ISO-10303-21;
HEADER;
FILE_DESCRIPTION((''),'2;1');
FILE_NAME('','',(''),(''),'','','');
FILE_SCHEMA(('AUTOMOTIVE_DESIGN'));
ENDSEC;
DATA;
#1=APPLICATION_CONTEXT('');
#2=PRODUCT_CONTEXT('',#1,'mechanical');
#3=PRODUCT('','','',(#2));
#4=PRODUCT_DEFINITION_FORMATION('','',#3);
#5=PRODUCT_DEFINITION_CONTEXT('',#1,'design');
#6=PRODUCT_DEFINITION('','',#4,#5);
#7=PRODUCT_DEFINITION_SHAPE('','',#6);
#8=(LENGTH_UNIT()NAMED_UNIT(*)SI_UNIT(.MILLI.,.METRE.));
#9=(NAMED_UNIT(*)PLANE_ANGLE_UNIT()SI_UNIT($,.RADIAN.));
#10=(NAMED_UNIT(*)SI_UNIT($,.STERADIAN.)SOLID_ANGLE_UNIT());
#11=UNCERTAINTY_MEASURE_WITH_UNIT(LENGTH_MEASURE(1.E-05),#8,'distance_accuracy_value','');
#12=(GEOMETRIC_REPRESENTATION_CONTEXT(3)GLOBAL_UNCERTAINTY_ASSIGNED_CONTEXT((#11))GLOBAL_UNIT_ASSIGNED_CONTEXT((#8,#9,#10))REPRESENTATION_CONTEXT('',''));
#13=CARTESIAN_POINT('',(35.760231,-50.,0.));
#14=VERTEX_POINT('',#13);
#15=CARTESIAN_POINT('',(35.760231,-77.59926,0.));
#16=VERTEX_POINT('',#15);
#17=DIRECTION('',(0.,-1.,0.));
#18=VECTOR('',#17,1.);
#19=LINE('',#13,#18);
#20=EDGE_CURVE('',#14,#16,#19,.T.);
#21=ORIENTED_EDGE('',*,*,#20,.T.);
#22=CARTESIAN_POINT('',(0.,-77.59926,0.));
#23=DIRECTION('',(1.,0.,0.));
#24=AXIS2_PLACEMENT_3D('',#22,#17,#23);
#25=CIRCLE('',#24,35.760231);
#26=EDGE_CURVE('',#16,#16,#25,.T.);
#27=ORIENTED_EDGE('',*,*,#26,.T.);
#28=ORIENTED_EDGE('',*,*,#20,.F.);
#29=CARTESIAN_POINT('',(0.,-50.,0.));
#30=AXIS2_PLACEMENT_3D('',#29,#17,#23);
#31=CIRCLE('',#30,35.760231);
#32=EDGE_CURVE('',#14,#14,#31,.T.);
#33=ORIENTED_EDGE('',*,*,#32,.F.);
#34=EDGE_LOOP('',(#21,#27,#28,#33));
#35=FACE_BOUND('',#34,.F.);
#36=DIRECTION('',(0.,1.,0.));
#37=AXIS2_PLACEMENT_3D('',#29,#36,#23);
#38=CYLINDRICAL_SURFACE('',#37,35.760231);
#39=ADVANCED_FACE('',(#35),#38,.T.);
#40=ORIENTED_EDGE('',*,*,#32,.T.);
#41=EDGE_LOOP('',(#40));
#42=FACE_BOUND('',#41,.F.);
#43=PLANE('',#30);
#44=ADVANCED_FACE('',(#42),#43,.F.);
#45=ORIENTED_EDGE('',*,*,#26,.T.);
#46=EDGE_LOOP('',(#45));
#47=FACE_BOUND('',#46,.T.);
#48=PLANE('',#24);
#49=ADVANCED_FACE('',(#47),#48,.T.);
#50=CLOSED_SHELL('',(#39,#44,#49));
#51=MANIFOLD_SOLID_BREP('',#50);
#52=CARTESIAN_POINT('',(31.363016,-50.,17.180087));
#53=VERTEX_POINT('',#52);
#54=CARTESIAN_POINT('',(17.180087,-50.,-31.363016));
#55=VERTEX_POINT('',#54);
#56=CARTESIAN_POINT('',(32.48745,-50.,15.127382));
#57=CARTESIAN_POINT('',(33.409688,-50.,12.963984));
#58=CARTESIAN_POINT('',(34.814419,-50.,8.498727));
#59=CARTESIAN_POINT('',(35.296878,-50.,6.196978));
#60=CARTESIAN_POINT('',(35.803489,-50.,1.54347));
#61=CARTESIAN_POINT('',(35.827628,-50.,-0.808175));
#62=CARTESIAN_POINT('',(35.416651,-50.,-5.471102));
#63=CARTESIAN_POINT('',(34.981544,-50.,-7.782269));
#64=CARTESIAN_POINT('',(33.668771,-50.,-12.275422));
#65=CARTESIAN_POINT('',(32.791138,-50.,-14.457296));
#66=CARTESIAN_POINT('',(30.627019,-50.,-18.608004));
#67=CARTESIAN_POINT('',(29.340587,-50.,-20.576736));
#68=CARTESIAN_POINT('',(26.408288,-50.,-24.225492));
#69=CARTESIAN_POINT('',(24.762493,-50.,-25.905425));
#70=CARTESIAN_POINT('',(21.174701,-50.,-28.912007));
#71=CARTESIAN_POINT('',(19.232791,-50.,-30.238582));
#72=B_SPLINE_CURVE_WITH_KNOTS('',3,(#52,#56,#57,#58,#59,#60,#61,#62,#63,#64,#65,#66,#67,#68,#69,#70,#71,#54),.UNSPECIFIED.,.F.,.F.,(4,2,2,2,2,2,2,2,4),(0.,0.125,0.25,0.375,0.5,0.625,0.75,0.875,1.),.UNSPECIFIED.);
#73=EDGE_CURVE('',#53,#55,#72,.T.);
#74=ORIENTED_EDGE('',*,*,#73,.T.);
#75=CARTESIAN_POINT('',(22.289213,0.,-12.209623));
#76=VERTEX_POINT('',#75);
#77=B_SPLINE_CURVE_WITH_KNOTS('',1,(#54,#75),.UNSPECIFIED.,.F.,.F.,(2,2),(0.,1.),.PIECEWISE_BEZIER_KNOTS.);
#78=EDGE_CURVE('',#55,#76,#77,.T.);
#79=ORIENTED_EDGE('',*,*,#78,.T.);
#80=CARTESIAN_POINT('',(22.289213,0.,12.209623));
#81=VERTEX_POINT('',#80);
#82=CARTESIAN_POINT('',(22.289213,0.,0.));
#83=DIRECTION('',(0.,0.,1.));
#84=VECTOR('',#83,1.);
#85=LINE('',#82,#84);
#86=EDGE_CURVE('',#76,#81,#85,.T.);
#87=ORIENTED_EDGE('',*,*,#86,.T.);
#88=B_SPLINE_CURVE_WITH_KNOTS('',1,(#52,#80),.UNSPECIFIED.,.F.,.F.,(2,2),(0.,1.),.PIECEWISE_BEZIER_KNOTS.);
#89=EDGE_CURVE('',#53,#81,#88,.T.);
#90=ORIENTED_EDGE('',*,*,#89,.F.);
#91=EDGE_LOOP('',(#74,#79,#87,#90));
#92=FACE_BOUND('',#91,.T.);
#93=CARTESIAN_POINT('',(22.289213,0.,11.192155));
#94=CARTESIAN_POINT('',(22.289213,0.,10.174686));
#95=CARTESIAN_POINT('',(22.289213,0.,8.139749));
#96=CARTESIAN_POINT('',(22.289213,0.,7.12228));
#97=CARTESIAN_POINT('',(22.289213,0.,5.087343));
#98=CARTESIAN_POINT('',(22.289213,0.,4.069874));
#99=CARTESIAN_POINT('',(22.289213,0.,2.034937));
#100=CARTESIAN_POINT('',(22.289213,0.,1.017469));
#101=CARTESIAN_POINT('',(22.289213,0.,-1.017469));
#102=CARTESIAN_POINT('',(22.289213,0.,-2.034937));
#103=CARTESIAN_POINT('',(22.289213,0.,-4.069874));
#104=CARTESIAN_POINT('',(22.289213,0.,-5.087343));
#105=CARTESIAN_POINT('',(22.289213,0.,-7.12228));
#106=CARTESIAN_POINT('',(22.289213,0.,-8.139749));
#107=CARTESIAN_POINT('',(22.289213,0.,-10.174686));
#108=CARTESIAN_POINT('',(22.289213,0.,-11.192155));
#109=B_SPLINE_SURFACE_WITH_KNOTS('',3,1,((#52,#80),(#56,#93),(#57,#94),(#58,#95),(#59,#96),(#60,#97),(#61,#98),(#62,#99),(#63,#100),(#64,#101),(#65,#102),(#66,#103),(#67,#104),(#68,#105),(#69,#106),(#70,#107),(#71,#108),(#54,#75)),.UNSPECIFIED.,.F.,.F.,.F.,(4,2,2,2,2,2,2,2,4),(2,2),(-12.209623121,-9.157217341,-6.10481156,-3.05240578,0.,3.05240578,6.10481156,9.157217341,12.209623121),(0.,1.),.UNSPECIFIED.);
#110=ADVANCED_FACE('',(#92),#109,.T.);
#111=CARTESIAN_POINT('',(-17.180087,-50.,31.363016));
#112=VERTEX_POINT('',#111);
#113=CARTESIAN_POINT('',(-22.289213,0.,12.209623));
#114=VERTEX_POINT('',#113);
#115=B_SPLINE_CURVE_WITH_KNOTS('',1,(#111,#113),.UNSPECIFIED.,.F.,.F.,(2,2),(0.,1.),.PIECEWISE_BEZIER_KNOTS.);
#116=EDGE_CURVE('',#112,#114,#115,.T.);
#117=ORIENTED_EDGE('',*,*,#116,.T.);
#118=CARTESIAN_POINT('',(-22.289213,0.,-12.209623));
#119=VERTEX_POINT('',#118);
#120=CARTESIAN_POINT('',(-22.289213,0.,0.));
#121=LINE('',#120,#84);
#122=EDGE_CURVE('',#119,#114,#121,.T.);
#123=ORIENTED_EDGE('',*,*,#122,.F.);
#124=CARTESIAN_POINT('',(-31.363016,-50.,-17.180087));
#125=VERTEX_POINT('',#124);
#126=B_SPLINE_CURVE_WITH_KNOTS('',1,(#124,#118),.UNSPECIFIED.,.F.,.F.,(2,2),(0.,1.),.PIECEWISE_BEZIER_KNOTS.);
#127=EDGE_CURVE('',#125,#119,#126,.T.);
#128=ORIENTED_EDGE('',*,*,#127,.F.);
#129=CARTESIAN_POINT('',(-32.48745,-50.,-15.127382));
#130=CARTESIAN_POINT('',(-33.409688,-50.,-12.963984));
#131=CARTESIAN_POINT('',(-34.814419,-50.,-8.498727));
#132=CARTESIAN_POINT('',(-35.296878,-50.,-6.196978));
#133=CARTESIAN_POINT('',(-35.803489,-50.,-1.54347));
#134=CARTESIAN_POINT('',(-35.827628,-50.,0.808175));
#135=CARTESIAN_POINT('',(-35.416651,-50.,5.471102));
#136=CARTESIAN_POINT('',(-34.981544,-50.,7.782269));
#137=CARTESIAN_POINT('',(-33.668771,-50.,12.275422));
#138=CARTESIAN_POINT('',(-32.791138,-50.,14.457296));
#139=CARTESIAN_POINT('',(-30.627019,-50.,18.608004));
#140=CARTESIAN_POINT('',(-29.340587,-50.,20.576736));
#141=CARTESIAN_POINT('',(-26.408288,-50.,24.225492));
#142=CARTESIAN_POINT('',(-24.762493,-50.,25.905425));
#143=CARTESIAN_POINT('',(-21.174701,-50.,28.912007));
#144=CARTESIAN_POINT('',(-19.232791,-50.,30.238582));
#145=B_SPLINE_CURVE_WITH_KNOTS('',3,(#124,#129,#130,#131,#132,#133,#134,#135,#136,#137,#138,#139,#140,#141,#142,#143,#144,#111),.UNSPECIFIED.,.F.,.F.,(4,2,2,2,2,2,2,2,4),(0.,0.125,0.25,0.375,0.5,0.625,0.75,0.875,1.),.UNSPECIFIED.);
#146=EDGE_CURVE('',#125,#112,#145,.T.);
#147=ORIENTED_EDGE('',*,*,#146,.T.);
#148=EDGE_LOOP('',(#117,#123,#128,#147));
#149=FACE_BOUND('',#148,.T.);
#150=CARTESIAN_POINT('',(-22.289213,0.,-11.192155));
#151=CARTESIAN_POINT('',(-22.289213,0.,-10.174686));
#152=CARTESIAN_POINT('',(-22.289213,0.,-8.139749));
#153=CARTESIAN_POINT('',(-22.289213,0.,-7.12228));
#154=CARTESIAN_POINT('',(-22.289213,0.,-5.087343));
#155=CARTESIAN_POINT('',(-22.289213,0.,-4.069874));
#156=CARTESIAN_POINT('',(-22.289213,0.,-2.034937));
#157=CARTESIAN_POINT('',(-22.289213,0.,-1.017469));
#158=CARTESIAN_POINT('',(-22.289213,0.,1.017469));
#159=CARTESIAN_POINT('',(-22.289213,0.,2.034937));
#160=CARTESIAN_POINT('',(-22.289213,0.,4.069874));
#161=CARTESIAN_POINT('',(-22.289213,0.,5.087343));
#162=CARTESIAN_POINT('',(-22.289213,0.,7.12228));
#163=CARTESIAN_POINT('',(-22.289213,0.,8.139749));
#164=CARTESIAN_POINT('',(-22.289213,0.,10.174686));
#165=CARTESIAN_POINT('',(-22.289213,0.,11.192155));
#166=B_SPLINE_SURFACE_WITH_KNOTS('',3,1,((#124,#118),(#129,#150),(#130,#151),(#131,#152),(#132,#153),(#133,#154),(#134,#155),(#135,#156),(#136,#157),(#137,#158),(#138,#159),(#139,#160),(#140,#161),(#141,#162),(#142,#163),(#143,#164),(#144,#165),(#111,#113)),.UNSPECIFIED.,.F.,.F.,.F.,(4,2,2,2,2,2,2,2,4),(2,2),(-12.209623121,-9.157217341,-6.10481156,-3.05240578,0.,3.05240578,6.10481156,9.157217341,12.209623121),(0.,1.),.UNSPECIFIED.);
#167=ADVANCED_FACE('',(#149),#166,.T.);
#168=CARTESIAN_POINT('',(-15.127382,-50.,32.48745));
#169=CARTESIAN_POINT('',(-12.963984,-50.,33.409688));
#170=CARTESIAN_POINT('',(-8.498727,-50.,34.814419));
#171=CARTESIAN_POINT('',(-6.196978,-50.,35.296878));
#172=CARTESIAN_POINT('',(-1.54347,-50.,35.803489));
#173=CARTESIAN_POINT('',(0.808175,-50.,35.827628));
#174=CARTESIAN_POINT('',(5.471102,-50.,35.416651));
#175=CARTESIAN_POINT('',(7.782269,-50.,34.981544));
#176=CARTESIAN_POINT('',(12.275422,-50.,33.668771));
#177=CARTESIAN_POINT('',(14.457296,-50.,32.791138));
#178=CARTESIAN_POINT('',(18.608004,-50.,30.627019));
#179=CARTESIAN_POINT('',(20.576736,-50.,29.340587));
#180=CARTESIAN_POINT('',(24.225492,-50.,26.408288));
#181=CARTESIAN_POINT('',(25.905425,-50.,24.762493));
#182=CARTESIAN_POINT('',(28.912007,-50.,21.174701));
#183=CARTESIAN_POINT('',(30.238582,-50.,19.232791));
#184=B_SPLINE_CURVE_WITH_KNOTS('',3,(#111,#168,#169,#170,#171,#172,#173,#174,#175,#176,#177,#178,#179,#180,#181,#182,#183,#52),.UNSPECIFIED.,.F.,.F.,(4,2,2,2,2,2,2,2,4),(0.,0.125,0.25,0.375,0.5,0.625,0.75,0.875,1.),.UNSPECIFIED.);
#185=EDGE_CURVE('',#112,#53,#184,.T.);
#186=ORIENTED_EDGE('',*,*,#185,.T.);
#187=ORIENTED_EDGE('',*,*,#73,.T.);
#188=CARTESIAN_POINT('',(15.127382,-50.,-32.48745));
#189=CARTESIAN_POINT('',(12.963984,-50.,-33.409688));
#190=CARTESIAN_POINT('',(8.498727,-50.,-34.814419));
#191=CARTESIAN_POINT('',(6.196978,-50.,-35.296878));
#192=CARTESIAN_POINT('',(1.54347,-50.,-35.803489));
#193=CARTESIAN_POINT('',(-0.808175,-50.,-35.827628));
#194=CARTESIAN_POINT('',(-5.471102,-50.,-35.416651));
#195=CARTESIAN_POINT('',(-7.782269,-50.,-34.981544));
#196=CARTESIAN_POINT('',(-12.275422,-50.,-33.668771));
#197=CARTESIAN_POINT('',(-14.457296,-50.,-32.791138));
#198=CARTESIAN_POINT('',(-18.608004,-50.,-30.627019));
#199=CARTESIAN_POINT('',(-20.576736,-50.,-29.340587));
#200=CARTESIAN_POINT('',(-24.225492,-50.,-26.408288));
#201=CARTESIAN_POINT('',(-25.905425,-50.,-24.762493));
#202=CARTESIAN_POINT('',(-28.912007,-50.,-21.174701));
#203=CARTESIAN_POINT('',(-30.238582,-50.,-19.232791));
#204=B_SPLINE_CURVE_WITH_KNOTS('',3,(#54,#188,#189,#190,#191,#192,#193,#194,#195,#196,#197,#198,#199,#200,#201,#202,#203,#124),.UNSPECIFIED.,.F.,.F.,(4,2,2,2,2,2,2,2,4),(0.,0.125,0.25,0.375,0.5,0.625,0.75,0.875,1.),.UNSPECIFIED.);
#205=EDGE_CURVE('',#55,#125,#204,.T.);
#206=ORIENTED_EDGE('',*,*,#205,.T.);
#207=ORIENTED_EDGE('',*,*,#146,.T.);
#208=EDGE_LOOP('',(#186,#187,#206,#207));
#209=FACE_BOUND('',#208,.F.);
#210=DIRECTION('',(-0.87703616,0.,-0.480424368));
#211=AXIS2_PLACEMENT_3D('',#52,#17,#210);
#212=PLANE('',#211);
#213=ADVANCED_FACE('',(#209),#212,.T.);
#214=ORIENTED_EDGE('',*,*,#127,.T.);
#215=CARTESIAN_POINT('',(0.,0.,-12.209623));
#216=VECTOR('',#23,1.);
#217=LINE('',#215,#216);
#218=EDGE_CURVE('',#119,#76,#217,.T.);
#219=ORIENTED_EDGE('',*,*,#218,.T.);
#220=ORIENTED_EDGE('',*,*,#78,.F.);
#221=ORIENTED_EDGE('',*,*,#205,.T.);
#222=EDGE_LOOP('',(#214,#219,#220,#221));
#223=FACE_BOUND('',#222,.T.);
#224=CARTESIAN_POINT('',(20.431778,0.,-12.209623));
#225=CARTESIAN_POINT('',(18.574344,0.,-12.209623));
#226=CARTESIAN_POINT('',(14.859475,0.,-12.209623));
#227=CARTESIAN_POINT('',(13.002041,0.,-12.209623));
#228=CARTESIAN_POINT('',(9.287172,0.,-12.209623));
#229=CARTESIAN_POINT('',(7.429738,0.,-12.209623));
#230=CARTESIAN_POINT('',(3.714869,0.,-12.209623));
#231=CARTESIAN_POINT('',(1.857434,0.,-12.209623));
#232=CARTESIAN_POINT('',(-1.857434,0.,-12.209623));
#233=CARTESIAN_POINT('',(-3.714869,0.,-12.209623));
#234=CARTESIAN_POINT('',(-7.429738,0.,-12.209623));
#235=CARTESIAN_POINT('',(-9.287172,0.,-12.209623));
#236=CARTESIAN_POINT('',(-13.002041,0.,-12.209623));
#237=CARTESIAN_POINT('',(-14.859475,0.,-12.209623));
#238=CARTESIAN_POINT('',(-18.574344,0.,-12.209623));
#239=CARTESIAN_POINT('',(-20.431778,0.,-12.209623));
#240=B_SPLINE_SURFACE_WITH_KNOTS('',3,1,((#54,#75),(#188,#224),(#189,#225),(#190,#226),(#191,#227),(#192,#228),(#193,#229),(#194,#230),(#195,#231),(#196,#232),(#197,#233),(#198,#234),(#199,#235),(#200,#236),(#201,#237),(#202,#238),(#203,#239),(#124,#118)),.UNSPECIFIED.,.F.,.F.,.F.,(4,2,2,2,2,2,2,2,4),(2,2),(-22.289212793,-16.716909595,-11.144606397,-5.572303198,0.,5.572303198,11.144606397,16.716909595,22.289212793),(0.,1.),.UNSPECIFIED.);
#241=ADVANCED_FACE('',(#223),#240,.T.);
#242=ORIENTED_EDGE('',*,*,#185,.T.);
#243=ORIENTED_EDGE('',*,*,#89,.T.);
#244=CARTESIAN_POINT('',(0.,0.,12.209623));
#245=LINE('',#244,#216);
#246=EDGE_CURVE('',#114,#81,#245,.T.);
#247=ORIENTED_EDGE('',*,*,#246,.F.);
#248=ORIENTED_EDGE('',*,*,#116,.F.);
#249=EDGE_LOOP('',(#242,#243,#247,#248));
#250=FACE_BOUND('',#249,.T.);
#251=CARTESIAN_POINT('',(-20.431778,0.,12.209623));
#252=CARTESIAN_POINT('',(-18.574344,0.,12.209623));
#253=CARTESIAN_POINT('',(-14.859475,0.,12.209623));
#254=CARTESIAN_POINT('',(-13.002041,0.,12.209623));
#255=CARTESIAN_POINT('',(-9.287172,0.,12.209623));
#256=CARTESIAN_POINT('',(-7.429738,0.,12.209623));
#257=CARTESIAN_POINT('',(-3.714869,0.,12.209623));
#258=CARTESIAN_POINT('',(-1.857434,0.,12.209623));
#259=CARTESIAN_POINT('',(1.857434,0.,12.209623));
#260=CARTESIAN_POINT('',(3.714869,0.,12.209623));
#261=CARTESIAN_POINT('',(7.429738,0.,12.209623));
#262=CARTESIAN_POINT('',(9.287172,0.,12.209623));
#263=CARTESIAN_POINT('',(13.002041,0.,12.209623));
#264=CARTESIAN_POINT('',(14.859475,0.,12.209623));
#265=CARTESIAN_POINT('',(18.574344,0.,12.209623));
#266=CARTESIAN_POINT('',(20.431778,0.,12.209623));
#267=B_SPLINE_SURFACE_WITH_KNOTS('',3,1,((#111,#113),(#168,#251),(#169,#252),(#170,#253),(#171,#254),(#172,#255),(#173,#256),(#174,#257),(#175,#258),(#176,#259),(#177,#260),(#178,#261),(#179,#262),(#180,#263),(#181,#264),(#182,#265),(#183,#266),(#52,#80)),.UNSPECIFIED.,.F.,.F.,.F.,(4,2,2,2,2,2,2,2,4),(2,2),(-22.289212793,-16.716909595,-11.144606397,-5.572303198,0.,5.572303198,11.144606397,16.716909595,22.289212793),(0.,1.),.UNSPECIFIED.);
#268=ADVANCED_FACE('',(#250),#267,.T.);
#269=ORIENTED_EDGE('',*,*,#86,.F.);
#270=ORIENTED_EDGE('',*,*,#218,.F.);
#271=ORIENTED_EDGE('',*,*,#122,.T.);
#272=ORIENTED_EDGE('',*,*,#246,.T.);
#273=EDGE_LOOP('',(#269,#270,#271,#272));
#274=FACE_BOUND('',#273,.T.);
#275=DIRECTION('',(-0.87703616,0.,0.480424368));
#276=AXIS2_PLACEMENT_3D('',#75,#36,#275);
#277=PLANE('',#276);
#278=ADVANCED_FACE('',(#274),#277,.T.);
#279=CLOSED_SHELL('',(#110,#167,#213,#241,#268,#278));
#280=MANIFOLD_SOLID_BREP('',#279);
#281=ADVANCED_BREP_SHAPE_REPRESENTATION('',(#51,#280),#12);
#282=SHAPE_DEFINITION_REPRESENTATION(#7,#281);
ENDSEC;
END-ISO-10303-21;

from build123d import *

# Parameters (mm, degrees)
F2_R     = 35.7602314712
F3_DEPTH = 27.59926
F0_W     = 44.5784255862
F0_H     = 24.4192462415


# Not quite as in the source:
# - the arcs of a loft's sections are written as splines that run evenly, so that the points pair up as in the source's solid


with BuildPart() as f3:
    # F2 (on offset) → F3 (new body)
    with BuildSketch(Plane.XZ.offset(50)):
        Circle(F2_R)
    extrude(amount=F3_DEPTH)


with BuildPart() as f4:
    # F3_face (on face) → F4 section 0
    with BuildSketch(Plane(origin=(0, -50, 0), x_dir=(1, 0, 0), z_dir=(0, 1, 0))):
        with BuildLine():
            add(Edge.make_bspline(
                [(31.3630160959, -17.1800866192), (32.4874501357, -15.1273820159), (33.4096876137, -12.9639838215), (34.8144187197, -8.4987265037), (35.2968776128, -6.1969777925), (35.8034887164, -1.5434696982), (35.8276283999, 0.8081746177), (35.4166507206, 5.4711017822), (34.9815435199, 7.7822693307), (33.6687706994, 12.2754218894), (32.7911375404, 14.4572957976), (30.627018702, 18.6080044175), (29.3405865347, 20.5767364947), (26.4082875517, 24.2254917713), (24.7624932428, 25.905424748), (21.1747007207, 28.9120070622), (19.2327912226, 30.2385820561), (17.1800866192, 31.3630160959)],
                knots=[0, 0, 0, 0, 0.125, 0.125, 0.25, 0.25, 0.375, 0.375, 0.5, 0.5, 0.625, 0.625, 0.75, 0.75, 0.875, 0.875, 1, 1, 1, 1], degree=3))
            add(Edge.make_bspline(
                [(17.1800866192, 31.3630160959), (15.1273820159, 32.4874501357), (12.9639838215, 33.4096876137), (8.4987265037, 34.8144187197), (6.1969777925, 35.2968776128), (1.5434696982, 35.8034887164), (-0.8081746177, 35.8276283999), (-5.4711017822, 35.4166507206), (-7.7822693307, 34.9815435199), (-12.2754218894, 33.6687706994), (-14.4572957976, 32.7911375404), (-18.6080044175, 30.627018702), (-20.5767364947, 29.3405865347), (-24.2254917713, 26.4082875517), (-25.905424748, 24.7624932428), (-28.9120070622, 21.1747007207), (-30.2385820561, 19.2327912226), (-31.3630160959, 17.1800866192)],
                knots=[0, 0, 0, 0, 0.125, 0.125, 0.25, 0.25, 0.375, 0.375, 0.5, 0.5, 0.625, 0.625, 0.75, 0.75, 0.875, 0.875, 1, 1, 1, 1], degree=3))
            add(Edge.make_bspline(
                [(-31.3630160959, 17.1800866192), (-32.4874501357, 15.1273820159), (-33.4096876137, 12.9639838215), (-34.8144187197, 8.4987265037), (-35.2968776128, 6.1969777925), (-35.8034887164, 1.5434696982), (-35.8276283999, -0.8081746177), (-35.4166507206, -5.4711017822), (-34.9815435199, -7.7822693307), (-33.6687706994, -12.2754218894), (-32.7911375404, -14.4572957976), (-30.627018702, -18.6080044175), (-29.3405865347, -20.5767364947), (-26.4082875517, -24.2254917713), (-24.7624932428, -25.905424748), (-21.1747007207, -28.9120070622), (-19.2327912226, -30.2385820561), (-17.1800866192, -31.3630160959)],
                knots=[0, 0, 0, 0, 0.125, 0.125, 0.25, 0.25, 0.375, 0.375, 0.5, 0.5, 0.625, 0.625, 0.75, 0.75, 0.875, 0.875, 1, 1, 1, 1], degree=3))
            add(Edge.make_bspline(
                [(-17.1800866192, -31.3630160959), (-15.1273820159, -32.4874501357), (-12.9639838215, -33.4096876137), (-8.4987265037, -34.8144187197), (-6.1969777925, -35.2968776128), (-1.5434696982, -35.8034887164), (0.8081746177, -35.8276283999), (5.4711017822, -35.4166507206), (7.7822693307, -34.9815435199), (12.2754218894, -33.6687706994), (14.4572957976, -32.7911375404), (18.6080044175, -30.627018702), (20.5767364947, -29.3405865347), (24.2254917713, -26.4082875517), (25.905424748, -24.7624932428), (28.9120070622, -21.1747007207), (30.2385820561, -19.2327912226), (31.3630160959, -17.1800866192)],
                knots=[0, 0, 0, 0, 0.125, 0.125, 0.25, 0.25, 0.375, 0.375, 0.5, 0.5, 0.625, 0.625, 0.75, 0.75, 0.875, 0.875, 1, 1, 1, 1], degree=3))
        make_face()
    # F0 (on Front) → F4 section 1
    with BuildSketch(Plane.XZ):
        Rectangle(F0_W, F0_H)
    loft(ruled=True)


solid = Compound([f3.part, f4.part])
